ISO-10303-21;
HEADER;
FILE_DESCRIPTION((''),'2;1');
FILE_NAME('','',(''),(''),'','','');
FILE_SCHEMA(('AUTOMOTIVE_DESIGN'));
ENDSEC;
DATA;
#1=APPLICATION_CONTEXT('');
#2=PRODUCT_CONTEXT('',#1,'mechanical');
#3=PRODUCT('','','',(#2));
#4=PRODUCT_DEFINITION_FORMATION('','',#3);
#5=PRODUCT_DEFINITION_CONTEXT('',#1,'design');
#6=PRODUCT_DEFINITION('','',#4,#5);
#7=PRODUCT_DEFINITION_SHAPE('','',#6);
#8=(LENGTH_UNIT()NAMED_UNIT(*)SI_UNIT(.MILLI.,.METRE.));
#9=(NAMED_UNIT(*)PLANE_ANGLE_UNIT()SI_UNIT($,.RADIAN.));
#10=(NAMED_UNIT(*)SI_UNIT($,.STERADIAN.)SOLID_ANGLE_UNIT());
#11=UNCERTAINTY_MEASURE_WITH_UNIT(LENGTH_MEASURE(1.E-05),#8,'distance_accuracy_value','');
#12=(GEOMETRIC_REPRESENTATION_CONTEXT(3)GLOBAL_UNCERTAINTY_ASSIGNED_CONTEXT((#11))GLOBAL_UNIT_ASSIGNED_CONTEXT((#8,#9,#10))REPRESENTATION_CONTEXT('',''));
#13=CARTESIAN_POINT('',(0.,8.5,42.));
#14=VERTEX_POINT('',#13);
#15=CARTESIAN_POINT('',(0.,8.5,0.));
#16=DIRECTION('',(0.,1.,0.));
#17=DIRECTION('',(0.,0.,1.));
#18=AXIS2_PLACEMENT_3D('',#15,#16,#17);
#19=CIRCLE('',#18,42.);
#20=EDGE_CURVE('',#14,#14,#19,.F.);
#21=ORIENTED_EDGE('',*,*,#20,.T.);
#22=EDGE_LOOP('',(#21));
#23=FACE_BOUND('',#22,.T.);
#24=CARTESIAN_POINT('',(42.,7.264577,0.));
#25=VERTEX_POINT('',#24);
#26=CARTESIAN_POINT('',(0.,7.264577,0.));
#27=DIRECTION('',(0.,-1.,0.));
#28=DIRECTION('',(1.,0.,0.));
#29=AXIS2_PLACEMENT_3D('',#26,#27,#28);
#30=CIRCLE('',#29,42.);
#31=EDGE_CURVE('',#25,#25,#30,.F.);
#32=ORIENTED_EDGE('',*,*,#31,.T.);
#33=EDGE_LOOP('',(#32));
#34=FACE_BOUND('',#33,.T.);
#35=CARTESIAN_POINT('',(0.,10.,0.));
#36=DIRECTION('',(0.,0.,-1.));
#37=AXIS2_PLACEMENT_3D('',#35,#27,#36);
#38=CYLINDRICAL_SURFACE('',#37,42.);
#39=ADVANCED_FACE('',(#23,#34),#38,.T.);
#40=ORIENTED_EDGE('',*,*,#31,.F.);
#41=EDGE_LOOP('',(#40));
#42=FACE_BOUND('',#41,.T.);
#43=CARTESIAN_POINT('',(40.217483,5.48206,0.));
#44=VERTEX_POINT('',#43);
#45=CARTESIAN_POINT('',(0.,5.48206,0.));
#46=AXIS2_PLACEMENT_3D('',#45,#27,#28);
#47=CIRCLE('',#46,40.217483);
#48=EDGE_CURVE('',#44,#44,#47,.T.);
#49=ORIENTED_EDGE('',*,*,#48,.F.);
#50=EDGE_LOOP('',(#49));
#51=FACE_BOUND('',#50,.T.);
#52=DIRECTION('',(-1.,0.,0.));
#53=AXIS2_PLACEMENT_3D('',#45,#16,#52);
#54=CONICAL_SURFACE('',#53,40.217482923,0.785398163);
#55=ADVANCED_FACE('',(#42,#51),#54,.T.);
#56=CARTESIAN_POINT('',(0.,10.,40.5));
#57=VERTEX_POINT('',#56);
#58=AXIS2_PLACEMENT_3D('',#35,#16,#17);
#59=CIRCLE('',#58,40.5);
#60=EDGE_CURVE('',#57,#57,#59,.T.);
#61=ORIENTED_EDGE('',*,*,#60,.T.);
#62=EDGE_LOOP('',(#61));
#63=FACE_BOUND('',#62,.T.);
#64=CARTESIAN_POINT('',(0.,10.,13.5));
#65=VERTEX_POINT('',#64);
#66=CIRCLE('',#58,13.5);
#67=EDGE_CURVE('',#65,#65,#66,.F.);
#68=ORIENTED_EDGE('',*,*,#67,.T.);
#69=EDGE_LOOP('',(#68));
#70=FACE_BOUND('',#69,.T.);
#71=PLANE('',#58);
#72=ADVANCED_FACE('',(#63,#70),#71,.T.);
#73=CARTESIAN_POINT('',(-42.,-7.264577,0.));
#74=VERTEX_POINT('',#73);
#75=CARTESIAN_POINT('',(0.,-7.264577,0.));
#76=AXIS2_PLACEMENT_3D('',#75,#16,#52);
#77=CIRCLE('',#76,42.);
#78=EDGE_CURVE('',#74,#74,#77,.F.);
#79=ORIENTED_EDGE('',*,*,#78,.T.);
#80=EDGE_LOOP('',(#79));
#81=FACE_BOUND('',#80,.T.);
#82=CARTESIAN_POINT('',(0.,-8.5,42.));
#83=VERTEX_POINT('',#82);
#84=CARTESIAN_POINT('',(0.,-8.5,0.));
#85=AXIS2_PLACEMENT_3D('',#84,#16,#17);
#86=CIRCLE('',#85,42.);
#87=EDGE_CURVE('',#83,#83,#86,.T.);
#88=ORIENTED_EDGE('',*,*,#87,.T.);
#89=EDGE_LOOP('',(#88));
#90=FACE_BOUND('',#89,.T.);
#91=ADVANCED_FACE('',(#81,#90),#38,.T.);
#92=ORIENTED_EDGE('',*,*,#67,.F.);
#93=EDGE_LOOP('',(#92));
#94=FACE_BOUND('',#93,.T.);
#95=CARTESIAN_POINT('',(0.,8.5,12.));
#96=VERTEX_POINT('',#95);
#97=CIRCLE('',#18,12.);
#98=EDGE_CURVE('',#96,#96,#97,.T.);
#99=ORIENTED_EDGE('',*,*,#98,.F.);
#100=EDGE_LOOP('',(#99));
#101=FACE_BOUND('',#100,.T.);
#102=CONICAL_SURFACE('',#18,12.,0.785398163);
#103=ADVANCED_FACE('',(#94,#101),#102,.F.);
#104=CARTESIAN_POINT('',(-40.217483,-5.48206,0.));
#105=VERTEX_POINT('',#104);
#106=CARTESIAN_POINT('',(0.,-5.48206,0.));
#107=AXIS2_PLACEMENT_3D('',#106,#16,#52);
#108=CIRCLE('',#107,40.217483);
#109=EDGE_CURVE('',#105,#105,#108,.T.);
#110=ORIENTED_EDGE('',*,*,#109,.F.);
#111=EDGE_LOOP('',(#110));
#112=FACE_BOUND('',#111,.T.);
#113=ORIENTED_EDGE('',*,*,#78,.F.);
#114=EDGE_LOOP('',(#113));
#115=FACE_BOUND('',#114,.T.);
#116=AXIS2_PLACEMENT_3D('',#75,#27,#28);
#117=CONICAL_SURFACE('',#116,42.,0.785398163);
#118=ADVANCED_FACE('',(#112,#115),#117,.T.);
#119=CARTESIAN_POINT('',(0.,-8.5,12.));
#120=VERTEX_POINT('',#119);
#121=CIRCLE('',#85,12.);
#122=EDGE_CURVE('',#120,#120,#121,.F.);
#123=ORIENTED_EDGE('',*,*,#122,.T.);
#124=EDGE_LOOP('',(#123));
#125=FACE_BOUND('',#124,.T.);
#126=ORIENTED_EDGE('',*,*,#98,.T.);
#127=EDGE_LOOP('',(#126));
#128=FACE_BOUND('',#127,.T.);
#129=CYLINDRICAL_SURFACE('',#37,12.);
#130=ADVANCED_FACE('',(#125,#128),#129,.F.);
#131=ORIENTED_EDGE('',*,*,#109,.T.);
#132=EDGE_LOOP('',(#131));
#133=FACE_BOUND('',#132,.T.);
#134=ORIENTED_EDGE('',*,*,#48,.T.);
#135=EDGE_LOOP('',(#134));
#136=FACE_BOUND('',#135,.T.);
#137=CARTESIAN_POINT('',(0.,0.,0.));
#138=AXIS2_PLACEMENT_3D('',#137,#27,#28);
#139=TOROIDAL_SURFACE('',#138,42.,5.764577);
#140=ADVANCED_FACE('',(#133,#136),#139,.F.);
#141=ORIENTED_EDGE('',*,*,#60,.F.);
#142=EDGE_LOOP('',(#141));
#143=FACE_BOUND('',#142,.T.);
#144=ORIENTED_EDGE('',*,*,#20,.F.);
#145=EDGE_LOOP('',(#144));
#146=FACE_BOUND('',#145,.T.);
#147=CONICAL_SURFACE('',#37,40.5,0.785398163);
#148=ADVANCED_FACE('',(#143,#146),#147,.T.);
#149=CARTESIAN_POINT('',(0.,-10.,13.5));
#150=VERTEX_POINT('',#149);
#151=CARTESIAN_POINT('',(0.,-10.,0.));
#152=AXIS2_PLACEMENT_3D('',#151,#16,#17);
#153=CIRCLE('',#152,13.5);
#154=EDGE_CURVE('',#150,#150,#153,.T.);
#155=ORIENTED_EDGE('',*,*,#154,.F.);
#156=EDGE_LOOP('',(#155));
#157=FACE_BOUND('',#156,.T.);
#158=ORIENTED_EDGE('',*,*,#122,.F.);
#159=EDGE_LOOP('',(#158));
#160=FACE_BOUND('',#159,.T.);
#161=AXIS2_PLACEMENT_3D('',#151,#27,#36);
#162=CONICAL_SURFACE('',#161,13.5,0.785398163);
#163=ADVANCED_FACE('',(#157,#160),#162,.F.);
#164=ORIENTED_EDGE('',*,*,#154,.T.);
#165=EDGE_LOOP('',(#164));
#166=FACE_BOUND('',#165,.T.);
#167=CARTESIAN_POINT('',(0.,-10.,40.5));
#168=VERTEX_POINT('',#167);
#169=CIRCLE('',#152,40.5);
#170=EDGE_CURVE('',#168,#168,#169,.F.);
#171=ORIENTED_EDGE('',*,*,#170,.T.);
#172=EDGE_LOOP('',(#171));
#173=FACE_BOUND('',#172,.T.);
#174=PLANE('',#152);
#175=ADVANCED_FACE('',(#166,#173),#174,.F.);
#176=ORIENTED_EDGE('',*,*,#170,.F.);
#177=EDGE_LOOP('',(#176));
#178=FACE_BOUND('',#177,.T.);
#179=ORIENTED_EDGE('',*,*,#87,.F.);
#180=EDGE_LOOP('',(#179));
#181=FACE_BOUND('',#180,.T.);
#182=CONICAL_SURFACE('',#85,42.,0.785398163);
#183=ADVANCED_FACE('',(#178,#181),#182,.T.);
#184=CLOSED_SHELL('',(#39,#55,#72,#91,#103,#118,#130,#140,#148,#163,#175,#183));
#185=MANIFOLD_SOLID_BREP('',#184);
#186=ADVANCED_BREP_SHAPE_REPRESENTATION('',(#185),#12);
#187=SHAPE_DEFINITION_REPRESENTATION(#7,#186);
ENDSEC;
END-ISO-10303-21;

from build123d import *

# Parameters (mm, degrees)
SKETCH1_R           = 42
SKETCH1_R_2         = 12
BOSS_EXTRUDE1_DEPTH = 10
CHAMFER1_SIZE       = 1.5


with BuildPart() as part:
    # Sketch1 → Boss-Extrude1 (new, symmetric)
    with BuildSketch(Plane(origin=(0, 0, 0), x_dir=(1, 0, 0), z_dir=(0, 1, 0))):
        with Locations(Location((0, 0, 0), (0, 0, 270))):
            Circle(SKETCH1_R)
        with Locations(Location((0, 0, 0), (0, 0, 270))):
            Circle(SKETCH1_R_2, mode=Mode.SUBTRACT)
    extrude(amount=BOSS_EXTRUDE1_DEPTH, both=True)

    # Sketch6 → Cut-Revolve11 (revolve, cut)
    with BuildSketch(Plane.XY, mode=Mode.PRIVATE) as cut_revolve11_sk:
        with BuildLine():
            Line((-42, 5.764577254), (-42, -5.764577254))
            ThreePointArc((-42, -5.764577254), (-36.235422746, 0), (-42, 5.764577254))
        make_face()
    revolve(cut_revolve11_sk.sketch.rotate(Axis((0, 0, 0), (0, 1, 0)), 180), axis=Axis((0, 0, 0), (0, 1, 0)), mode=Mode.SUBTRACT)

    # Chamfer1
    # the kernel refuses this chamfer: 1.5 mm, written as the material it takes off along each edge
    with BuildSketch(Plane(origin=(0, -5.764577254, 0), x_dir=(0, 0, 1), z_dir=(-1, 0, 0))) as chamfer1_piece_1:
        with BuildLine():
            Line((42, -CHAMFER1_SIZE), (40.217482923, 0.282517077))
            ThreePointArc((40.217482923, 0.282517077), (41.073277318, 0.074978324), (42, 0))
            Line((42, 0), (42, -CHAMFER1_SIZE))
        make_face()
    revolve(axis=Axis((0, -5.764577254, 0), (0, 1, 0)), revolution_arc=90, mode=Mode.SUBTRACT)
    with BuildSketch(Plane(origin=(0, 5.764577254, 0), x_dir=(1, 0, 0), z_dir=(0, 0, 1))) as chamfer1_piece_2:
        with BuildLine():
            Line((40.217482923, -0.282517077), (42, CHAMFER1_SIZE))
            Line((42, CHAMFER1_SIZE), (42, 0))
            ThreePointArc((42, 0), (41.073277318, -0.074978324), (40.217482923, -0.282517077))
        make_face()
    revolve(axis=Axis((0, 5.764577254, 0), (0, 1, 0)), revolution_arc=270, mode=Mode.SUBTRACT)
    with BuildSketch(Plane(origin=(0, -10, 0), x_dir=(0, 0, 1), z_dir=(-1, 0, 0))) as chamfer1_piece_3:
        Polygon((42, CHAMFER1_SIZE), (42 - CHAMFER1_SIZE, 0), (42, 0), align=None)
    revolve(axis=Axis((0, -10, 0), (0, 1, 0)), mode=Mode.SUBTRACT)
    with BuildSketch(Plane(origin=(0, 10, 0), x_dir=(0, 0, 1), z_dir=(-1, 0, 0))) as chamfer1_piece_4:
        Polygon((42, -CHAMFER1_SIZE), (42 - CHAMFER1_SIZE, 0), (42, 0), align=None)
    revolve(axis=Axis((0, 10, 0), (0, 1, 0)), mode=Mode.SUBTRACT)
    with BuildSketch(Plane(origin=(0, -10, 0), x_dir=(0, 0, 1), z_dir=(-1, 0, 0))) as chamfer1_piece_5:
        Polygon((12 + CHAMFER1_SIZE, 0), (12, CHAMFER1_SIZE), (12, 0), align=None)
    revolve(axis=Axis((0, -10, 0), (0, 1, 0)), mode=Mode.SUBTRACT)
    with BuildSketch(Plane(origin=(0, 10, 0), x_dir=(0, 0, 1), z_dir=(-1, 0, 0))) as chamfer1_piece_6:
        Polygon((12, -CHAMFER1_SIZE), (12 + CHAMFER1_SIZE, 0), (12, 0), align=None)
    revolve(axis=Axis((0, 10, 0), (0, 1, 0)), mode=Mode.SUBTRACT)
    with BuildSketch(Plane(origin=(0, 5.764577254, 0), x_dir=(0, 0, 1), z_dir=(-1, 0, 0))) as chamfer1_piece_7:
        with BuildLine():
            Line((40.217482923, -0.282517077), (42, CHAMFER1_SIZE))
            Line((42, CHAMFER1_SIZE), (42, 0))
            ThreePointArc((42, 0), (41.073277318, -0.074978324), (40.217482923, -0.282517077))
        make_face()
    revolve(axis=Axis((0, 5.764577254, 0), (0, 1, 0)), revolution_arc=90, mode=Mode.SUBTRACT)
    with BuildSketch(Plane(origin=(0, -5.764577254, 0), x_dir=(1, 0, 0), z_dir=(0, 0, 1))) as chamfer1_piece_8:
        with BuildLine():
            Line((42, -CHAMFER1_SIZE), (40.217482923, 0.282517077))
            ThreePointArc((40.217482923, 0.282517077), (41.073277318, 0.074978324), (42, 0))
            Line((42, 0), (42, -CHAMFER1_SIZE))
        make_face()
    revolve(axis=Axis((0, -5.764577254, 0), (0, 1, 0)), revolution_arc=270, mode=Mode.SUBTRACT)


solid = part.part
